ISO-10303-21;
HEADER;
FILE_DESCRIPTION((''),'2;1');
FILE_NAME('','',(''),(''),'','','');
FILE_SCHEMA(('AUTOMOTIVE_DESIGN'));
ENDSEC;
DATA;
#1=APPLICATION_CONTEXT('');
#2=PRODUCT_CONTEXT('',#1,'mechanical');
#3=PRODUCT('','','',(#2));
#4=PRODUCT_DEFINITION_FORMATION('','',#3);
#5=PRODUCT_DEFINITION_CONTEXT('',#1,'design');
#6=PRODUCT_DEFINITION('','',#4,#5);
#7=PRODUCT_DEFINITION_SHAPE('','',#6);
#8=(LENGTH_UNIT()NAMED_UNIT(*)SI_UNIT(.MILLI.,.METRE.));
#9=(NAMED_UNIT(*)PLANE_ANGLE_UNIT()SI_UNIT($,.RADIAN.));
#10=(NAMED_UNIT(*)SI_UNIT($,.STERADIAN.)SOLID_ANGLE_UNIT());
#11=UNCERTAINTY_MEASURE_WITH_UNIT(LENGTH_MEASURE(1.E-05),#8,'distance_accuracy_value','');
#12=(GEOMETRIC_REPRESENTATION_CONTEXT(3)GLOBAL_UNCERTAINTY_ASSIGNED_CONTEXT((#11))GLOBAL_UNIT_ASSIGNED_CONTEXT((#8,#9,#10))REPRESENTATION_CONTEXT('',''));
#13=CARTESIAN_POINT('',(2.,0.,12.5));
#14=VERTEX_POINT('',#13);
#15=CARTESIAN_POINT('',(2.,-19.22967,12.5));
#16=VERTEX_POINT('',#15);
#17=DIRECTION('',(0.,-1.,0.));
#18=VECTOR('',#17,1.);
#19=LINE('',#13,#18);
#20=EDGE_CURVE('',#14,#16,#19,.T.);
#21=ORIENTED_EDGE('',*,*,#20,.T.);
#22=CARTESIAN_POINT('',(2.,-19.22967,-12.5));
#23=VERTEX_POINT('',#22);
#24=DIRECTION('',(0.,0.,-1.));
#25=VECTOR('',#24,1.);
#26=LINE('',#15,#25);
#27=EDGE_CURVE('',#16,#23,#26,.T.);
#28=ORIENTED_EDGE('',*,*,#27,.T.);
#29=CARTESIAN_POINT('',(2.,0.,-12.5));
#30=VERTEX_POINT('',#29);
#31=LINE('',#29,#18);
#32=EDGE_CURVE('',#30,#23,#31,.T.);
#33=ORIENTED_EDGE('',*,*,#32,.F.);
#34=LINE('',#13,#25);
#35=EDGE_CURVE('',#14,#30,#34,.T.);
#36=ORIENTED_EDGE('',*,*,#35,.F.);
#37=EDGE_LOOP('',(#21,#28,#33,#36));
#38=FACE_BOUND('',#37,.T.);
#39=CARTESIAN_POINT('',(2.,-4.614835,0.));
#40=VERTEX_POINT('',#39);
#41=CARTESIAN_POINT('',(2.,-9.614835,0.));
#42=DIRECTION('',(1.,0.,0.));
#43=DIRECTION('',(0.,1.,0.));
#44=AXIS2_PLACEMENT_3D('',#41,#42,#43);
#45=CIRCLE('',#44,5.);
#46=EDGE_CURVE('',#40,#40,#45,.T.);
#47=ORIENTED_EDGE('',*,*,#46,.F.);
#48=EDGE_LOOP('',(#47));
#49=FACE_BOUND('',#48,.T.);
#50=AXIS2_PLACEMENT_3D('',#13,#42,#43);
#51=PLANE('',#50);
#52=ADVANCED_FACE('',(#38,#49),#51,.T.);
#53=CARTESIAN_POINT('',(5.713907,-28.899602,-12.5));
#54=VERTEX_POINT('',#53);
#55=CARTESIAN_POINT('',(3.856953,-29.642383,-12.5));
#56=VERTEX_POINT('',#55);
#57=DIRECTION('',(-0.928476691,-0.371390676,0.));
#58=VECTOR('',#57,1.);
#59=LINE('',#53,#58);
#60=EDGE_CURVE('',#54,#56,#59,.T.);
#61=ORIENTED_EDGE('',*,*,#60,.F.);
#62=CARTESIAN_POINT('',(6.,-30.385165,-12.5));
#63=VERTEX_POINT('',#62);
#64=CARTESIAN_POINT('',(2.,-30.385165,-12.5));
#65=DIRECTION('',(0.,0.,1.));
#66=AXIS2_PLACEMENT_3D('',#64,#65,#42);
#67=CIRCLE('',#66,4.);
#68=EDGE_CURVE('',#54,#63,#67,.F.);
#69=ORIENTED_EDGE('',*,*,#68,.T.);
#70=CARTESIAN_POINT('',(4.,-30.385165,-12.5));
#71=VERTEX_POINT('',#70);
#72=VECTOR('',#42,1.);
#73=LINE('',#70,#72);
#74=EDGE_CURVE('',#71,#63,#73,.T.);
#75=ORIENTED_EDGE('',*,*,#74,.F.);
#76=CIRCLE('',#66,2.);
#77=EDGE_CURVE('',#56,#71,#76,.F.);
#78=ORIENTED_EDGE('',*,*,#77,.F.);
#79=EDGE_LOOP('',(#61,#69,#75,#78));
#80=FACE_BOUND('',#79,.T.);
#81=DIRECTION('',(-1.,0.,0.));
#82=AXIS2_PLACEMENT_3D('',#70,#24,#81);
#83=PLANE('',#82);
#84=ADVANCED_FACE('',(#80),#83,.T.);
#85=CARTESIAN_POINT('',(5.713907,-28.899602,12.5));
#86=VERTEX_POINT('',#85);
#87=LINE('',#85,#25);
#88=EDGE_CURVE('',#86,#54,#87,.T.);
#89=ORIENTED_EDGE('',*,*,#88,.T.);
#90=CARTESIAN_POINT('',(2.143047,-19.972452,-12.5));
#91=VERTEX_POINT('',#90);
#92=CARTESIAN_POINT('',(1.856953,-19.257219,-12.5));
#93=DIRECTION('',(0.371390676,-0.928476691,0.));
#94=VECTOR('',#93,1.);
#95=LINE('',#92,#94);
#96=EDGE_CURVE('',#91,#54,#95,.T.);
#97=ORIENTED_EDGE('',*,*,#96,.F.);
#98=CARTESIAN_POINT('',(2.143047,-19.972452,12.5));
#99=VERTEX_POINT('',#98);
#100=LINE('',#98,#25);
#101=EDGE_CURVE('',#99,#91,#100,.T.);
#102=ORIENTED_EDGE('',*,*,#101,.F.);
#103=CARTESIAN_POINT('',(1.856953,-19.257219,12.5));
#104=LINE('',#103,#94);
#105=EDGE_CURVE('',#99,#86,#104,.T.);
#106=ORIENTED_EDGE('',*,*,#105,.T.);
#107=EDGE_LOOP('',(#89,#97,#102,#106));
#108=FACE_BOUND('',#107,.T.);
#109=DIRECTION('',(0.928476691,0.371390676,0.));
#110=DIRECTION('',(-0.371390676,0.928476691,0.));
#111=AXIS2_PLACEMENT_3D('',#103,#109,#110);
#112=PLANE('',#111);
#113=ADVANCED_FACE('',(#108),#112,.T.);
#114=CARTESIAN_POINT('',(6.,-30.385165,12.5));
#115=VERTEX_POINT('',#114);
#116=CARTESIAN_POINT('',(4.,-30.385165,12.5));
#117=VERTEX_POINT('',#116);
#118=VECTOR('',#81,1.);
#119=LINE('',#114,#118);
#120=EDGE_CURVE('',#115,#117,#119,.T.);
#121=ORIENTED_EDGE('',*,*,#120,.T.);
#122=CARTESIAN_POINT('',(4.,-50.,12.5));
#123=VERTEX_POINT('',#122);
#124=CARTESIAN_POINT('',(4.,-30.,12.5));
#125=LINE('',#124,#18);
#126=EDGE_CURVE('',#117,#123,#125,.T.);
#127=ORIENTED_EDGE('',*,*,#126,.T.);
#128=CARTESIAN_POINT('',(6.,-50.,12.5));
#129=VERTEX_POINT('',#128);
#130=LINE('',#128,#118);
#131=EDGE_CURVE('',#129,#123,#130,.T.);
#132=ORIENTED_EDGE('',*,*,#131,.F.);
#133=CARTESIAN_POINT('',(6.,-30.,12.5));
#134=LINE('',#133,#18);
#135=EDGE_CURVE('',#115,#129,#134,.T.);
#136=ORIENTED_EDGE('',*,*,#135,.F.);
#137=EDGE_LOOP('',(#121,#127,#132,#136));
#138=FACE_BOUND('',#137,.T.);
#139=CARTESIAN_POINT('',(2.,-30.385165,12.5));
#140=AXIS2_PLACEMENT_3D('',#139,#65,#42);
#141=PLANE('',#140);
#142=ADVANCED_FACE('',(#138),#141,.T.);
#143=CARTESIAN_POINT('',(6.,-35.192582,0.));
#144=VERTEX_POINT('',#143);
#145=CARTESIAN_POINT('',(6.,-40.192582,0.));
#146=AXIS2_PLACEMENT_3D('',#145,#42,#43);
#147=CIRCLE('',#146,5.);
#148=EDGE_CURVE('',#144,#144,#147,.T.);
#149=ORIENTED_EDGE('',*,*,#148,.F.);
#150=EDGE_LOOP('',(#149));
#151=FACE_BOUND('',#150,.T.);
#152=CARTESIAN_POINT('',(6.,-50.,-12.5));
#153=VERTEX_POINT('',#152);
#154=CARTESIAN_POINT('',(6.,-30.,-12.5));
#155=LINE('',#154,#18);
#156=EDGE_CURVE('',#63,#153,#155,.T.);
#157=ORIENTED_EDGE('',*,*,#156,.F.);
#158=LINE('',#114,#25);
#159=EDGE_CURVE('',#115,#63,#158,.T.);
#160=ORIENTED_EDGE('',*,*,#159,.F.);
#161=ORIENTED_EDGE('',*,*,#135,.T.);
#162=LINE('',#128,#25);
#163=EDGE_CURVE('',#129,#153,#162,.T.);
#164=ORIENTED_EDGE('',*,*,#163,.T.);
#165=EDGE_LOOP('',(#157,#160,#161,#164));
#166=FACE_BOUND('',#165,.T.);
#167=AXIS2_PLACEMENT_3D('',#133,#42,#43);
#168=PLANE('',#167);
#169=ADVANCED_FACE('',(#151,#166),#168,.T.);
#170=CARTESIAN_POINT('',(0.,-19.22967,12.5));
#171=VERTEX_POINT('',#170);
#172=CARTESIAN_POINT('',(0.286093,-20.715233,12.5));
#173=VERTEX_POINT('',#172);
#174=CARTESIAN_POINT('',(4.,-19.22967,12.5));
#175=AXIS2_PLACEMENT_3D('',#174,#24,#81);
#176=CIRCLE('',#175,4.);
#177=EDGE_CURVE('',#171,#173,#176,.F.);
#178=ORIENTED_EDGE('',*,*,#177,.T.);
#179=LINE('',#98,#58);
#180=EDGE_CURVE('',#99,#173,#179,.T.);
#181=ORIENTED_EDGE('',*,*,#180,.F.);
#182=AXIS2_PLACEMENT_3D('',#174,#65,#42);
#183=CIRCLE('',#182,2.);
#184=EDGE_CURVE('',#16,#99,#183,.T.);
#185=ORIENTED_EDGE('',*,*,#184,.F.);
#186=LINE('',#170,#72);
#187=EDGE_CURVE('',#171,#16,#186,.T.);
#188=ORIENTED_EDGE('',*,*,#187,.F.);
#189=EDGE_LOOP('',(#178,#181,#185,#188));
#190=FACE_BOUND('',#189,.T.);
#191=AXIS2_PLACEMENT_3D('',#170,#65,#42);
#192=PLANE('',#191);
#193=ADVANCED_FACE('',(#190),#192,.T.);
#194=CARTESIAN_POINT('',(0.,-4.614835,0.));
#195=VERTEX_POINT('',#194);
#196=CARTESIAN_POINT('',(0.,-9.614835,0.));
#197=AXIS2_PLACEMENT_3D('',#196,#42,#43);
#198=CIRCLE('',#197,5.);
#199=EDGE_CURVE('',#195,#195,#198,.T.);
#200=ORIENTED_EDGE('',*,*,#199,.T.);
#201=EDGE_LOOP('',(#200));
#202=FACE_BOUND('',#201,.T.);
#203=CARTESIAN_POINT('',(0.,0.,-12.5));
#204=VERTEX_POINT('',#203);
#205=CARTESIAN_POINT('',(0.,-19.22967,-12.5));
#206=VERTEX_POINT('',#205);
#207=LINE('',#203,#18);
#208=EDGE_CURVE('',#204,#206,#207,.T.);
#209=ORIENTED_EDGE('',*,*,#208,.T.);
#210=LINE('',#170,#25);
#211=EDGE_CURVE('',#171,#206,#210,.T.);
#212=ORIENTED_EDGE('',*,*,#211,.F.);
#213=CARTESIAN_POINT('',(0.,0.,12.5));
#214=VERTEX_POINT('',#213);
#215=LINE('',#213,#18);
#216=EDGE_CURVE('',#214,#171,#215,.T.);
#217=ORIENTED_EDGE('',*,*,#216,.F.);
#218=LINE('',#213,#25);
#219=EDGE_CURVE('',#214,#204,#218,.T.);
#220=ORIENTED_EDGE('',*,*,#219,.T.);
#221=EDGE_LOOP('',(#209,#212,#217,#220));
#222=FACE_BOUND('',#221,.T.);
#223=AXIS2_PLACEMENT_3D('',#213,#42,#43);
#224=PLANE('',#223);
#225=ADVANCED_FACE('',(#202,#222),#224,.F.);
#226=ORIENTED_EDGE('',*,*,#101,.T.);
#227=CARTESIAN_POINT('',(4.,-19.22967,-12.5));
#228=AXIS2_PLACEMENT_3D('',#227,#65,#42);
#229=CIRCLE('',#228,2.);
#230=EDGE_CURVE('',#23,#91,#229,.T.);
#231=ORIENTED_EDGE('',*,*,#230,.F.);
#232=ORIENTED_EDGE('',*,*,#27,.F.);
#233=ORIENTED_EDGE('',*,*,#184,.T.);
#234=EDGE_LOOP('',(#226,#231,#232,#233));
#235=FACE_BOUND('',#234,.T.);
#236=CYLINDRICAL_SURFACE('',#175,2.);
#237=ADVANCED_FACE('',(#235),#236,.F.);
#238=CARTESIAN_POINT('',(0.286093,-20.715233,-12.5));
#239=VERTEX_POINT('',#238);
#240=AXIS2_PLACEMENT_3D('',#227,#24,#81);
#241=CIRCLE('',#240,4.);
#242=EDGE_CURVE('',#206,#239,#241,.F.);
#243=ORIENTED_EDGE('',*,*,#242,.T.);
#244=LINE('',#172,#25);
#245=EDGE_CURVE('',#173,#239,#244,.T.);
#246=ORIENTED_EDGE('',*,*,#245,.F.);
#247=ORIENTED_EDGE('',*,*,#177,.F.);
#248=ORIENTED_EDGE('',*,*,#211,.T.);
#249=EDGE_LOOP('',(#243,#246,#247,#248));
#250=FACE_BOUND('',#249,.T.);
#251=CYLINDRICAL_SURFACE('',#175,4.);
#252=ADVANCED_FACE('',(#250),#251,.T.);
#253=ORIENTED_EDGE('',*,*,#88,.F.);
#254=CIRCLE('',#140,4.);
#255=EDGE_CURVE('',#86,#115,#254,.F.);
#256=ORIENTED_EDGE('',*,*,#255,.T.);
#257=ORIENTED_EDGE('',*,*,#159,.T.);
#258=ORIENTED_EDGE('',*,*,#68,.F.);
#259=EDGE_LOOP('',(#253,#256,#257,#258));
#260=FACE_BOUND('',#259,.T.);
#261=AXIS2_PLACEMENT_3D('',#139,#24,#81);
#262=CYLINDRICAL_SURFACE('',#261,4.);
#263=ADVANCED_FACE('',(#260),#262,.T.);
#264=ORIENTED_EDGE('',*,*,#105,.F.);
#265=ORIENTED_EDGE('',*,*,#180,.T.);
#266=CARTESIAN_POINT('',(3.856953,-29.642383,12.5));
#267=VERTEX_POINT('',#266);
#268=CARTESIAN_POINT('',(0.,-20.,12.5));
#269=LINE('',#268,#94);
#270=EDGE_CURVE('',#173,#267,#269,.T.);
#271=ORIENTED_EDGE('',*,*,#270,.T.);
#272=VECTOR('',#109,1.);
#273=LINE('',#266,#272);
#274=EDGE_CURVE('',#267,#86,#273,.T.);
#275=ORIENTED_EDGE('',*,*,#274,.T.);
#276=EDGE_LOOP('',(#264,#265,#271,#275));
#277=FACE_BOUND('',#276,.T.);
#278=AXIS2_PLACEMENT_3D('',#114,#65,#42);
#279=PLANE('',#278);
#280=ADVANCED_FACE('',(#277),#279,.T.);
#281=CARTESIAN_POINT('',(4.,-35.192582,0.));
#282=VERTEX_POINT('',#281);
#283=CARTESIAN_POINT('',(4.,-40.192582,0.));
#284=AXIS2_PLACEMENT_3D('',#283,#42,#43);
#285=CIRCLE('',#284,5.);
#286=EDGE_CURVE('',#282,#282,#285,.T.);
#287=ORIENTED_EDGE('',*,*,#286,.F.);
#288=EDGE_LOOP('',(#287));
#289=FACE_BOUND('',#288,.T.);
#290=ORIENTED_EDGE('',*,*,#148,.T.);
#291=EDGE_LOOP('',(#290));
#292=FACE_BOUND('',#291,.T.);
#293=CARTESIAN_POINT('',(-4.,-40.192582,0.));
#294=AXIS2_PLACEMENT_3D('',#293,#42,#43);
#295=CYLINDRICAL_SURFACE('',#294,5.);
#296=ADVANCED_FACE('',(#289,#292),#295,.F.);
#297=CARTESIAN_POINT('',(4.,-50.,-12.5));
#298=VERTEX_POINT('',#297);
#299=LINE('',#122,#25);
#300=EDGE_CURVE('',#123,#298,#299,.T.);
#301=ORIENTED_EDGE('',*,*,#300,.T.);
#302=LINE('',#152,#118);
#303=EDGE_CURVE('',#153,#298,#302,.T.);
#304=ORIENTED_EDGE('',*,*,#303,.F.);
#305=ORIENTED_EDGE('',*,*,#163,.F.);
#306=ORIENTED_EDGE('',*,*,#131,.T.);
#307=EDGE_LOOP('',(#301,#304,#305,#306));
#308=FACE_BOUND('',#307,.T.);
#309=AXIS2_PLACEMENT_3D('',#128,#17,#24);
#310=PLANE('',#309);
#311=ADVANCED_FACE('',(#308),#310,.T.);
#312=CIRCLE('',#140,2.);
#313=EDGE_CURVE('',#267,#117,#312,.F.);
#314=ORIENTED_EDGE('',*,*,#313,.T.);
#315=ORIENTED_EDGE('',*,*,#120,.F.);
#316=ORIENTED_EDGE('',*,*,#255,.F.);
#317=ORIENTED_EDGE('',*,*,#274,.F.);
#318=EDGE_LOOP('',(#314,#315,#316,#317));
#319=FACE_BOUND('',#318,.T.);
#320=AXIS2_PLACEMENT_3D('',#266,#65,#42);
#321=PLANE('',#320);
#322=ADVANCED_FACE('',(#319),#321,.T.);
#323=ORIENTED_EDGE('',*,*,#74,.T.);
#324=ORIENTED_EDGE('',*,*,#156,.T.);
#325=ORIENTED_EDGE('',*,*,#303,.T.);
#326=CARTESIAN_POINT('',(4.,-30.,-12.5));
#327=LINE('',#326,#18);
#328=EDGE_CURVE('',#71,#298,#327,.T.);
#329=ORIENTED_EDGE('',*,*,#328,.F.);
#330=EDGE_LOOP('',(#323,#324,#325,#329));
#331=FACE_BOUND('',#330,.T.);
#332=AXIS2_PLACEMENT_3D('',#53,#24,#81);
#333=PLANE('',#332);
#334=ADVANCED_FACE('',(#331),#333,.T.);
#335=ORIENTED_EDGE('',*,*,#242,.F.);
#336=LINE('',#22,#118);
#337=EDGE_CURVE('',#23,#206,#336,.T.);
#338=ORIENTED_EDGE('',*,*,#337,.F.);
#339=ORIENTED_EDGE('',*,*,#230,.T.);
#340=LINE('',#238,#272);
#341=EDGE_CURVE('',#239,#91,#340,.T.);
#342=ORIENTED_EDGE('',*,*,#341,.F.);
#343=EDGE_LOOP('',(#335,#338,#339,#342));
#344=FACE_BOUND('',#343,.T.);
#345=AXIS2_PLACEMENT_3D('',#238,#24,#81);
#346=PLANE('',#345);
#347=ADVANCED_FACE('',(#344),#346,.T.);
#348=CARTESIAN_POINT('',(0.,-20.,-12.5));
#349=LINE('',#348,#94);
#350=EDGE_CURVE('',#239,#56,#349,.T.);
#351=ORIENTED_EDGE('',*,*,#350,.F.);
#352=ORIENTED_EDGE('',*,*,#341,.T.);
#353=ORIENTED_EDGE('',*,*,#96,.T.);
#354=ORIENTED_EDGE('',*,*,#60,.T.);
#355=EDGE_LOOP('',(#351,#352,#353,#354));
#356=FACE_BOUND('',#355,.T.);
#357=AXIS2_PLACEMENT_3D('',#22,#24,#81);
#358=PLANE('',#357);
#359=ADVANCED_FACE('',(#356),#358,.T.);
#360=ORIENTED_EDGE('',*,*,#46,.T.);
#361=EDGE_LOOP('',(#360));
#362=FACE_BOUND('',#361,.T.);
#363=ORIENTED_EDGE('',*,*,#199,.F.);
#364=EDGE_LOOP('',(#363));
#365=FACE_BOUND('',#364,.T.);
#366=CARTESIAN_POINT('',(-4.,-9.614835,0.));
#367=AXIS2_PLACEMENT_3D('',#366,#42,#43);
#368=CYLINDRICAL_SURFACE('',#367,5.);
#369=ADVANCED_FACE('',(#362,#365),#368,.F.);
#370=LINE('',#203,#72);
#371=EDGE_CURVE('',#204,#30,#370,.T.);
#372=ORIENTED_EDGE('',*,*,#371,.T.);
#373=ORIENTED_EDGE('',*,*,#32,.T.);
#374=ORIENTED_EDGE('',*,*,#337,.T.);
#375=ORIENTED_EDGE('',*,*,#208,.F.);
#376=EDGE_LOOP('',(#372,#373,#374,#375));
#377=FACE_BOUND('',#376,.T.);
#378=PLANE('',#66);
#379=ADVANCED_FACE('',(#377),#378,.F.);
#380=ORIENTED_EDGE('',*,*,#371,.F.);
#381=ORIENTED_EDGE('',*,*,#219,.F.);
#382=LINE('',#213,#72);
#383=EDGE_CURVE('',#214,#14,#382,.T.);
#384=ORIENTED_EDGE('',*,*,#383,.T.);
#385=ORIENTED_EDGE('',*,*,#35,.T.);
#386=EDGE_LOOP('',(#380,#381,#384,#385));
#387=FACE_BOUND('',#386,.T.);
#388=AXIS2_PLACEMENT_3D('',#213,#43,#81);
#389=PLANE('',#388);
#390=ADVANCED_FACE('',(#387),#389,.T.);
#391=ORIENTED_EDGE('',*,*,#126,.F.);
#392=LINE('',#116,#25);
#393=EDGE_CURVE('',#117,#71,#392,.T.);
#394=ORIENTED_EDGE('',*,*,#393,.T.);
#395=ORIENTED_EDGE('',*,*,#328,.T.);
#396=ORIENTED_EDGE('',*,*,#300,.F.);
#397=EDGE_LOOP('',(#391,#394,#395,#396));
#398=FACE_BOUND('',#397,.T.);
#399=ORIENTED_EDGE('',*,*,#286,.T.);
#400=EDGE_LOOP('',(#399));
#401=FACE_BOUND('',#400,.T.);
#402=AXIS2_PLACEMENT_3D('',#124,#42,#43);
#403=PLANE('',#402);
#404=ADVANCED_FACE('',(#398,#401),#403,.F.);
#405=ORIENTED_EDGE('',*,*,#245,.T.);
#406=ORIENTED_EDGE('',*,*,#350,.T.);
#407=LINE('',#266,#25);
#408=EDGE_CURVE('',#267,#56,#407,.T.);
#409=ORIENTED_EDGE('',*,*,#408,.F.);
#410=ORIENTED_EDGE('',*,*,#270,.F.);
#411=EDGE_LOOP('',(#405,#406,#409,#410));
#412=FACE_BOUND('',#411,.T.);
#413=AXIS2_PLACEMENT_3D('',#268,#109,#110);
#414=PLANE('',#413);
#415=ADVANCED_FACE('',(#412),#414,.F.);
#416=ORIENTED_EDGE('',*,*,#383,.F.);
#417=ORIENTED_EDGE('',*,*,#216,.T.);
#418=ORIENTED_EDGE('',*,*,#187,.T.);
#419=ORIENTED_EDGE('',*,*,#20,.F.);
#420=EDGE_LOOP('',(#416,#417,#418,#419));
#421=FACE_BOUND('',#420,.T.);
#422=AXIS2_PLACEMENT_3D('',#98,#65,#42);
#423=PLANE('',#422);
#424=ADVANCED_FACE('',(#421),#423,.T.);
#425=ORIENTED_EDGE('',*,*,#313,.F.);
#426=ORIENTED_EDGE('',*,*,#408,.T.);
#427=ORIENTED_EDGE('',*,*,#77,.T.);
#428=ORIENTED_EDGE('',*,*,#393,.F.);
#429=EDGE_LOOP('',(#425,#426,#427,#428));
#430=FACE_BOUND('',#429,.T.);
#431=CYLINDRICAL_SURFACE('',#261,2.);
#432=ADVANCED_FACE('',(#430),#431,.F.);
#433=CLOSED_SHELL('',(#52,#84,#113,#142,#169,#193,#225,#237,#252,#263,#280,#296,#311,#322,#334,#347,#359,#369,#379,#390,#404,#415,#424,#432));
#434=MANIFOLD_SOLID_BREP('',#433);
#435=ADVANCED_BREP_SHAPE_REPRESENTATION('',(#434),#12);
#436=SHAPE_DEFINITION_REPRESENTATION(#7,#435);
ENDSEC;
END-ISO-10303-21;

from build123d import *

# Parameters (mm, degrees)
FLANGE_BASE1_DEPTH    = 12.5
ESBO_O3_R             = 5
CORTE_EXTRUS_O1_DEPTH = 10


# Sheet-metal steps are written as plain solids
with BuildPart() as part:
    # Esboço1 → Flange-base1 (new, symmetric)
    with BuildSketch(Plane.XY):
        with BuildLine():
            Line((0, 0), (0, -19.229670386))
            ThreePointArc((0, -19.229670386), (0.072174453, -19.98610047), (0.286093236, -20.715233091))
            Line((0.286093236, -20.715233091), (3.856953382, -29.642383454))
            ThreePointArc((3.856953382, -29.642383454), (3.963912773, -30.006949765), (4, -30.385164807))
            Line((4, -30.385164807), (4, -50))
            Line((4, -50), (6, -50))
            Line((6, -50), (6, -30.385164807))
            ThreePointArc((6, -30.385164807), (5.927825547, -29.628734723), (5.713906764, -28.899602102))
            Line((5.713906764, -28.899602102), (2.143046618, -19.972451738))
            ThreePointArc((2.143046618, -19.972451738), (2.036087227, -19.607885428), (2, -19.229670386))
            Line((2, -19.229670386), (2, 0))
            Line((2, 0), (0, 0))
        make_face()
    extrude(amount=FLANGE_BASE1_DEPTH, both=True)

    # Esboço3 → Corte-extrusão1 (cut)
    with BuildSketch(Plane(origin=(6, 0, 0), x_dir=(0, 0, -1), z_dir=(1, 0, 0))):
        with Locations(Location((0, -40.192582404, 0), (0, 0, 90))):
            Circle(ESBO_O3_R)
        with Locations(Location((0, -9.614835193, 0), (0, 0, 90))):
            Circle(ESBO_O3_R)
    extrude(amount=-CORTE_EXTRUS_O1_DEPTH, mode=Mode.SUBTRACT)


solid = part.part
